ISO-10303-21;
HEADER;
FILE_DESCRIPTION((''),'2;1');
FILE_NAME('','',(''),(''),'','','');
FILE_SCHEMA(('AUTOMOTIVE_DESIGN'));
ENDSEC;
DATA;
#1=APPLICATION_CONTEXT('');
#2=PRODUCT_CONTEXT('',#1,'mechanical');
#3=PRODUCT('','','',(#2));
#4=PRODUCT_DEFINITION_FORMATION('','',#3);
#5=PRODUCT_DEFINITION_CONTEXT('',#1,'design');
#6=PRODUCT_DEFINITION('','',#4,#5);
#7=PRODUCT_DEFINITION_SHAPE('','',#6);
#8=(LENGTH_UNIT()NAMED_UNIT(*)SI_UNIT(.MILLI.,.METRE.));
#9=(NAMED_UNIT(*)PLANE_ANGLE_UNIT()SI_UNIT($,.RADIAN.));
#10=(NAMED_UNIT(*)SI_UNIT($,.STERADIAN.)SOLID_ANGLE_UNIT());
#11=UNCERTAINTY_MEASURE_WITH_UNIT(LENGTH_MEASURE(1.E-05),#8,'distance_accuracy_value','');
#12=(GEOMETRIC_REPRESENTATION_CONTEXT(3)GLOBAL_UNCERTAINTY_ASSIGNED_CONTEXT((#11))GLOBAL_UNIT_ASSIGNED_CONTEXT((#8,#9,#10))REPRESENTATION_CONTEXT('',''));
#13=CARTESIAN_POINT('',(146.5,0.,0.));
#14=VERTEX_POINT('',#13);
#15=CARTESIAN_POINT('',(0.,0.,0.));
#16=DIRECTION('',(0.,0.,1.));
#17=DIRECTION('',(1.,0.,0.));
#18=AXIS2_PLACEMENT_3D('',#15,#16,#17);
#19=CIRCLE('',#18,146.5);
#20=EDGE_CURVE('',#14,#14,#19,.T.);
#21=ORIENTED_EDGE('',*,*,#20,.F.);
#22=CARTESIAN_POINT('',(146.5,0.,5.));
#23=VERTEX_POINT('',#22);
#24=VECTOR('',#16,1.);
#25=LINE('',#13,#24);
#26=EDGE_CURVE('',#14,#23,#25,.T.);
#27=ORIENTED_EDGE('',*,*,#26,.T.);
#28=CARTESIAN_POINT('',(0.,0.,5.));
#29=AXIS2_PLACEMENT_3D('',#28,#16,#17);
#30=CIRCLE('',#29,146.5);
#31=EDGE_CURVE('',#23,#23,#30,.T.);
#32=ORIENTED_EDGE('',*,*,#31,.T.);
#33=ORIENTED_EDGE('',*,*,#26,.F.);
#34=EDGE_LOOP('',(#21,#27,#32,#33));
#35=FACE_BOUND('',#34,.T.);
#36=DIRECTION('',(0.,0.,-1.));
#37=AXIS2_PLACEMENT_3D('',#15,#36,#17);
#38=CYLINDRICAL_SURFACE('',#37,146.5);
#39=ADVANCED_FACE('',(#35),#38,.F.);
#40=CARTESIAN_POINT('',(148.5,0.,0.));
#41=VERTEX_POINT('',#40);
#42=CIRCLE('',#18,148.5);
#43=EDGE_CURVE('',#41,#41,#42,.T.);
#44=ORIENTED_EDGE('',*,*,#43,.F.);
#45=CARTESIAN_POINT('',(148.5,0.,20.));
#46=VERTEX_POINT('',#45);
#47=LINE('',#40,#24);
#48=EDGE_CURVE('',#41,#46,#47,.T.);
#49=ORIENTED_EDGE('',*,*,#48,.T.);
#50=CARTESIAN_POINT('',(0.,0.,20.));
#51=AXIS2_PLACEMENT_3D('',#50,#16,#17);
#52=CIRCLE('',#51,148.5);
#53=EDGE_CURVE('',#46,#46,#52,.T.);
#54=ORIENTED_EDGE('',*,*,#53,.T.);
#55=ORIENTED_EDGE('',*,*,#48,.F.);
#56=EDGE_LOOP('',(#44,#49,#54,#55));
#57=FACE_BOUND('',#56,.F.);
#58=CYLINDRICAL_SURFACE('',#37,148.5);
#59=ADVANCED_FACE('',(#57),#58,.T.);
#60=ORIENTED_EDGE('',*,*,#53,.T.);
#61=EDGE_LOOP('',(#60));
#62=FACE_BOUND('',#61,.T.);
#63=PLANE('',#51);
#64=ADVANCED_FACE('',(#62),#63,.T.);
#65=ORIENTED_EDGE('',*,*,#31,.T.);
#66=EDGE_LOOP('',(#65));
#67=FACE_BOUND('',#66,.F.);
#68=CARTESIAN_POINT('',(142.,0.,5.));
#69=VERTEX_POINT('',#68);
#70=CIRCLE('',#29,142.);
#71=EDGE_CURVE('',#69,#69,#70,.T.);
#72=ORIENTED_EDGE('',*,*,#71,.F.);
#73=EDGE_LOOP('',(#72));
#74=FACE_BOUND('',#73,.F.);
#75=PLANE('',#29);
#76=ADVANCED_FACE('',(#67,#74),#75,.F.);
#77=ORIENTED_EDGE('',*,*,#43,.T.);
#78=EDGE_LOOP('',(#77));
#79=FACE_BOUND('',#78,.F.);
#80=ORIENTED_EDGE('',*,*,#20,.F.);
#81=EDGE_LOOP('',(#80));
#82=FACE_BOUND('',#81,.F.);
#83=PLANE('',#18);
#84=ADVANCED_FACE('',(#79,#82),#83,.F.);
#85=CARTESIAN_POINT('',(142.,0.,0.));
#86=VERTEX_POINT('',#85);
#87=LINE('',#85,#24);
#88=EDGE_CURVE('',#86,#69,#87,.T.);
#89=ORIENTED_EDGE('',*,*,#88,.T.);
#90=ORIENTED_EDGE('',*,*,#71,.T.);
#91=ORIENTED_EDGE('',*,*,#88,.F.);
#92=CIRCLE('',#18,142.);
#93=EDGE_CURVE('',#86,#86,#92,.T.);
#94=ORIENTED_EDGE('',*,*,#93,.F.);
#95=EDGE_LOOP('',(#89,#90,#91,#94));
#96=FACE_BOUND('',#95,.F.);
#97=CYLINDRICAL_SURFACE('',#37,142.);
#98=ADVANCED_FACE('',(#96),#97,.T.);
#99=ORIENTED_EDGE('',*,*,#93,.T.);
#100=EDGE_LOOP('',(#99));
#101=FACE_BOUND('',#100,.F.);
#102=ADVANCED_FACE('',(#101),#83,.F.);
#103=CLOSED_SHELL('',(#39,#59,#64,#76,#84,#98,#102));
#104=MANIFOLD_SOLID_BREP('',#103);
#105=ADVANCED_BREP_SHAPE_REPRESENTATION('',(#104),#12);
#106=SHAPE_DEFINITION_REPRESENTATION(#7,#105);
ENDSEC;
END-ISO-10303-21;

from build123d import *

# Parameters (mm, degrees)
F0_R     = 148.5
F1_DEPTH = 20
F2_R     = 146.5
F2_R_2   = 142
F3_DEPTH = 5


# Not quite as in the source:
# - a feature names something its author has since deleted; it is built from what else it names


with BuildPart() as f1:
    # F0 (on Top) → F1 (new body)
    with BuildSketch(Plane.XY):
        Circle(F0_R)
    extrude(amount=F1_DEPTH)

    # F2 (on face) → F3 (cut)
    with BuildSketch(Plane.XY):
        Circle(F2_R)
        Circle(F2_R_2, mode=Mode.SUBTRACT)
    extrude(amount=F3_DEPTH, mode=Mode.SUBTRACT)


solid = f1.part
